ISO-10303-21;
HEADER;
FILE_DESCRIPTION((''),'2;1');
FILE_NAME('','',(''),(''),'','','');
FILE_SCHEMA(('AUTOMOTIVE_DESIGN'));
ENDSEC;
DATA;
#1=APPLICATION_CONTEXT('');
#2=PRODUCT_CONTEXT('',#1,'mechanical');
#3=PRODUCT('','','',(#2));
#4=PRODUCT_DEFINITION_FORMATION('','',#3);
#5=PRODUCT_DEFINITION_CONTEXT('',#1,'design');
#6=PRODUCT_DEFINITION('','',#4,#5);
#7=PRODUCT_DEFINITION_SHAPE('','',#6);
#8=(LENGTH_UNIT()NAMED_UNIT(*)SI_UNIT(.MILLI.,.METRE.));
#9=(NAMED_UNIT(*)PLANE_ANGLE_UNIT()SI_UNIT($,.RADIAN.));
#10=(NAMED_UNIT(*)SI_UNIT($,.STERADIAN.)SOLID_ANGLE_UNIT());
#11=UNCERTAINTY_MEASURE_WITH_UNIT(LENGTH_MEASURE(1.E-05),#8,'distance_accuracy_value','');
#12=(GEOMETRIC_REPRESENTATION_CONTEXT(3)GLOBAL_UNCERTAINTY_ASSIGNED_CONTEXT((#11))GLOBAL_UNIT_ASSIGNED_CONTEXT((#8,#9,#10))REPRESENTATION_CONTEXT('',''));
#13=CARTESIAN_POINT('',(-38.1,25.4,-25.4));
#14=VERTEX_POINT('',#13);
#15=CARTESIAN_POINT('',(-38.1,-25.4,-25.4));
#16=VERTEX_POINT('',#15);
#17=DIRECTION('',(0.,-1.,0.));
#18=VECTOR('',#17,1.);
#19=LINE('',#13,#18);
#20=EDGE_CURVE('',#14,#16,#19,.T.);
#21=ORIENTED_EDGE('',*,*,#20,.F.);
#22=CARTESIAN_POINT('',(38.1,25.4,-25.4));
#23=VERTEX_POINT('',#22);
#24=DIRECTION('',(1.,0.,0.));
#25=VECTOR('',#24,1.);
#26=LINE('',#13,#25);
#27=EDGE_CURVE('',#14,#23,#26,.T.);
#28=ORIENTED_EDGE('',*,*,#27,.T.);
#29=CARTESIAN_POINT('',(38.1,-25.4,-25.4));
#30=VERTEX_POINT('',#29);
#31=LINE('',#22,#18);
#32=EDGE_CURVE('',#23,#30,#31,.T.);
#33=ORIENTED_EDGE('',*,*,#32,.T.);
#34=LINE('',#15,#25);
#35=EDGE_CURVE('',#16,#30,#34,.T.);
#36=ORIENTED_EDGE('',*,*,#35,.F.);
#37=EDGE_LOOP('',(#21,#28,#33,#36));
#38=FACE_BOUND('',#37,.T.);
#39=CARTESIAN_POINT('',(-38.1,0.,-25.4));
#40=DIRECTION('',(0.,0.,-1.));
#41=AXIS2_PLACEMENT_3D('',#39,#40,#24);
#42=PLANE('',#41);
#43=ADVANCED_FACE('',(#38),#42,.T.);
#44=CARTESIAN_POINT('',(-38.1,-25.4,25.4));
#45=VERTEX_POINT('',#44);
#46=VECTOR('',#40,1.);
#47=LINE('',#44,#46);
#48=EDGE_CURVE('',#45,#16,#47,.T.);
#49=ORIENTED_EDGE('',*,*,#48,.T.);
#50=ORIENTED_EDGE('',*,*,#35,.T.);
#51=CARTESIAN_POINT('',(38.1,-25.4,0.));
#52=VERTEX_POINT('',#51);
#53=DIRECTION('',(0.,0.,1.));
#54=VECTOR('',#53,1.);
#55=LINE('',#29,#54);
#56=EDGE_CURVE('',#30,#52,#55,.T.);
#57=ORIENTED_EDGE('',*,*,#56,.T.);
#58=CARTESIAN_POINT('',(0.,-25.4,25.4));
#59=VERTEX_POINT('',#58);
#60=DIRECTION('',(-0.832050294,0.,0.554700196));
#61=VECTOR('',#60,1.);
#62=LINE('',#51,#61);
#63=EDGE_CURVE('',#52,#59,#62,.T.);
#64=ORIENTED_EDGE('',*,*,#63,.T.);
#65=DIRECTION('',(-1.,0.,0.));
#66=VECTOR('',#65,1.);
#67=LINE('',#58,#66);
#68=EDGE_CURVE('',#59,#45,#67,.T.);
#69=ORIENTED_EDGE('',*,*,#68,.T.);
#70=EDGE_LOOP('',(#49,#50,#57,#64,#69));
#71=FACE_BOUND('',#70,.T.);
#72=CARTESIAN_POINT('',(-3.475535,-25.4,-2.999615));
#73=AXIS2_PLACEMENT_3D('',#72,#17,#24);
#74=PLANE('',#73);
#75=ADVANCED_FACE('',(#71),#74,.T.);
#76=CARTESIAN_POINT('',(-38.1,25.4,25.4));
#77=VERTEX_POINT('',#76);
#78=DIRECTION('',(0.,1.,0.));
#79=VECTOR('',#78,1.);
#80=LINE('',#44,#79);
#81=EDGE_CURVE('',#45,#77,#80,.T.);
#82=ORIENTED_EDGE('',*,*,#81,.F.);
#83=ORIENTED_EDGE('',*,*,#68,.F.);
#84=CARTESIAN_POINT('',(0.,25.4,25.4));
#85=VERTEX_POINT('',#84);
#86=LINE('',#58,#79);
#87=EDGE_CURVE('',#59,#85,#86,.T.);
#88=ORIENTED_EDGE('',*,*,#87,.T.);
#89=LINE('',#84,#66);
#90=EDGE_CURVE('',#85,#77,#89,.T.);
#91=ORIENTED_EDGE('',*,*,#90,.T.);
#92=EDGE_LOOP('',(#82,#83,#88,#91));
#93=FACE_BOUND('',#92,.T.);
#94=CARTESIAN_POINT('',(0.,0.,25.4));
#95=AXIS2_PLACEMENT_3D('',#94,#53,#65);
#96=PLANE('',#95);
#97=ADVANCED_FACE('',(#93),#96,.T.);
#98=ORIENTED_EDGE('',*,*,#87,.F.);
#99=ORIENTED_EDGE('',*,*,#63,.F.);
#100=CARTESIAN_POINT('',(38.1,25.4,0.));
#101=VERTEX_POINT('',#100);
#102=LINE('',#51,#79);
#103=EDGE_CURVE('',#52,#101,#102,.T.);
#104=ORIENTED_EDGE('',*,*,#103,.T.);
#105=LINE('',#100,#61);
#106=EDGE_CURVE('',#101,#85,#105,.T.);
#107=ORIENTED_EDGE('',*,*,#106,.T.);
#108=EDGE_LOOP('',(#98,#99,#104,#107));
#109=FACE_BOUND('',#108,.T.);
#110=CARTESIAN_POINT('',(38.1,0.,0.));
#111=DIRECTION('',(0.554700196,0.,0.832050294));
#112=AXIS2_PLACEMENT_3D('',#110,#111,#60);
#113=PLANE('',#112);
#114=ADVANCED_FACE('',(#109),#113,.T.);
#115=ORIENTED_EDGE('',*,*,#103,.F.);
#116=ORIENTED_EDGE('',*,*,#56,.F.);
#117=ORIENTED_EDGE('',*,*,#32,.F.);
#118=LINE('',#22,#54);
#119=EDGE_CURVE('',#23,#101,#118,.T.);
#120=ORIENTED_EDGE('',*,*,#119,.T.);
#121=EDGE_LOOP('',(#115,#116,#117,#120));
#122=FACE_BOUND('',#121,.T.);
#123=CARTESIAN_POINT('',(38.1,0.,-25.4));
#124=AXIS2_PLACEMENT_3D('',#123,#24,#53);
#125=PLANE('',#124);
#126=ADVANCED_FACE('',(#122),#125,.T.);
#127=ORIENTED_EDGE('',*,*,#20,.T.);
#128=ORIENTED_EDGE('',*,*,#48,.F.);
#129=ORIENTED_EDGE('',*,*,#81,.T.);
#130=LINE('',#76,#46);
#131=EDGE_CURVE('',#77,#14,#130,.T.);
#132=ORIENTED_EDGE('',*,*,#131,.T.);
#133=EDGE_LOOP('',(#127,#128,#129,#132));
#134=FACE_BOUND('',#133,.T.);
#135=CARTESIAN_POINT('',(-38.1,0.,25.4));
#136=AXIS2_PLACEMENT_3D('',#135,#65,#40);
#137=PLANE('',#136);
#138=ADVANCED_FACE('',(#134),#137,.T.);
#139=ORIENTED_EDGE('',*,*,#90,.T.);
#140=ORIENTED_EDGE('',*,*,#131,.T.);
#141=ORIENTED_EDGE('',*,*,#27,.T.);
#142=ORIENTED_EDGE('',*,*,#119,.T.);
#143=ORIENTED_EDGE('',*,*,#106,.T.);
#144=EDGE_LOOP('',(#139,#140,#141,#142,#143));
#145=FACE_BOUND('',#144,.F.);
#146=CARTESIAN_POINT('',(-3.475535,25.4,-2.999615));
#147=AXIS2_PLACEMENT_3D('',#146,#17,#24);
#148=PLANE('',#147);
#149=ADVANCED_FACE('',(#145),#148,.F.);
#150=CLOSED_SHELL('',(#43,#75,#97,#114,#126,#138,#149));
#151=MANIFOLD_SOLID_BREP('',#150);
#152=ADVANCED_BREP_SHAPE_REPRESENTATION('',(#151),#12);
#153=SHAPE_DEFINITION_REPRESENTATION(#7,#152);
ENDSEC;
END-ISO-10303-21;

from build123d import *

# Parameters (mm, degrees)
F0_R     = 12.7
F1_DEPTH = 25.4


# Not quite as in the source:
# - the program builds the solid bodies; features that only make, move or delete a surface that nothing else refers to are left out


with BuildPart() as f1:
    # F0 (on Front) → F1 (new body, symmetric)
    with BuildSketch(Plane.XZ):
        Polygon((-38.1, 25.4), (-38.1, -25.4), (38.1, -25.4), (38.1, 0), (0, 25.4), align=None)
        Circle(F0_R, mode=Mode.SUBTRACT)
        Circle(F0_R)
    extrude(amount=F1_DEPTH, both=True)


solid = f1.part
